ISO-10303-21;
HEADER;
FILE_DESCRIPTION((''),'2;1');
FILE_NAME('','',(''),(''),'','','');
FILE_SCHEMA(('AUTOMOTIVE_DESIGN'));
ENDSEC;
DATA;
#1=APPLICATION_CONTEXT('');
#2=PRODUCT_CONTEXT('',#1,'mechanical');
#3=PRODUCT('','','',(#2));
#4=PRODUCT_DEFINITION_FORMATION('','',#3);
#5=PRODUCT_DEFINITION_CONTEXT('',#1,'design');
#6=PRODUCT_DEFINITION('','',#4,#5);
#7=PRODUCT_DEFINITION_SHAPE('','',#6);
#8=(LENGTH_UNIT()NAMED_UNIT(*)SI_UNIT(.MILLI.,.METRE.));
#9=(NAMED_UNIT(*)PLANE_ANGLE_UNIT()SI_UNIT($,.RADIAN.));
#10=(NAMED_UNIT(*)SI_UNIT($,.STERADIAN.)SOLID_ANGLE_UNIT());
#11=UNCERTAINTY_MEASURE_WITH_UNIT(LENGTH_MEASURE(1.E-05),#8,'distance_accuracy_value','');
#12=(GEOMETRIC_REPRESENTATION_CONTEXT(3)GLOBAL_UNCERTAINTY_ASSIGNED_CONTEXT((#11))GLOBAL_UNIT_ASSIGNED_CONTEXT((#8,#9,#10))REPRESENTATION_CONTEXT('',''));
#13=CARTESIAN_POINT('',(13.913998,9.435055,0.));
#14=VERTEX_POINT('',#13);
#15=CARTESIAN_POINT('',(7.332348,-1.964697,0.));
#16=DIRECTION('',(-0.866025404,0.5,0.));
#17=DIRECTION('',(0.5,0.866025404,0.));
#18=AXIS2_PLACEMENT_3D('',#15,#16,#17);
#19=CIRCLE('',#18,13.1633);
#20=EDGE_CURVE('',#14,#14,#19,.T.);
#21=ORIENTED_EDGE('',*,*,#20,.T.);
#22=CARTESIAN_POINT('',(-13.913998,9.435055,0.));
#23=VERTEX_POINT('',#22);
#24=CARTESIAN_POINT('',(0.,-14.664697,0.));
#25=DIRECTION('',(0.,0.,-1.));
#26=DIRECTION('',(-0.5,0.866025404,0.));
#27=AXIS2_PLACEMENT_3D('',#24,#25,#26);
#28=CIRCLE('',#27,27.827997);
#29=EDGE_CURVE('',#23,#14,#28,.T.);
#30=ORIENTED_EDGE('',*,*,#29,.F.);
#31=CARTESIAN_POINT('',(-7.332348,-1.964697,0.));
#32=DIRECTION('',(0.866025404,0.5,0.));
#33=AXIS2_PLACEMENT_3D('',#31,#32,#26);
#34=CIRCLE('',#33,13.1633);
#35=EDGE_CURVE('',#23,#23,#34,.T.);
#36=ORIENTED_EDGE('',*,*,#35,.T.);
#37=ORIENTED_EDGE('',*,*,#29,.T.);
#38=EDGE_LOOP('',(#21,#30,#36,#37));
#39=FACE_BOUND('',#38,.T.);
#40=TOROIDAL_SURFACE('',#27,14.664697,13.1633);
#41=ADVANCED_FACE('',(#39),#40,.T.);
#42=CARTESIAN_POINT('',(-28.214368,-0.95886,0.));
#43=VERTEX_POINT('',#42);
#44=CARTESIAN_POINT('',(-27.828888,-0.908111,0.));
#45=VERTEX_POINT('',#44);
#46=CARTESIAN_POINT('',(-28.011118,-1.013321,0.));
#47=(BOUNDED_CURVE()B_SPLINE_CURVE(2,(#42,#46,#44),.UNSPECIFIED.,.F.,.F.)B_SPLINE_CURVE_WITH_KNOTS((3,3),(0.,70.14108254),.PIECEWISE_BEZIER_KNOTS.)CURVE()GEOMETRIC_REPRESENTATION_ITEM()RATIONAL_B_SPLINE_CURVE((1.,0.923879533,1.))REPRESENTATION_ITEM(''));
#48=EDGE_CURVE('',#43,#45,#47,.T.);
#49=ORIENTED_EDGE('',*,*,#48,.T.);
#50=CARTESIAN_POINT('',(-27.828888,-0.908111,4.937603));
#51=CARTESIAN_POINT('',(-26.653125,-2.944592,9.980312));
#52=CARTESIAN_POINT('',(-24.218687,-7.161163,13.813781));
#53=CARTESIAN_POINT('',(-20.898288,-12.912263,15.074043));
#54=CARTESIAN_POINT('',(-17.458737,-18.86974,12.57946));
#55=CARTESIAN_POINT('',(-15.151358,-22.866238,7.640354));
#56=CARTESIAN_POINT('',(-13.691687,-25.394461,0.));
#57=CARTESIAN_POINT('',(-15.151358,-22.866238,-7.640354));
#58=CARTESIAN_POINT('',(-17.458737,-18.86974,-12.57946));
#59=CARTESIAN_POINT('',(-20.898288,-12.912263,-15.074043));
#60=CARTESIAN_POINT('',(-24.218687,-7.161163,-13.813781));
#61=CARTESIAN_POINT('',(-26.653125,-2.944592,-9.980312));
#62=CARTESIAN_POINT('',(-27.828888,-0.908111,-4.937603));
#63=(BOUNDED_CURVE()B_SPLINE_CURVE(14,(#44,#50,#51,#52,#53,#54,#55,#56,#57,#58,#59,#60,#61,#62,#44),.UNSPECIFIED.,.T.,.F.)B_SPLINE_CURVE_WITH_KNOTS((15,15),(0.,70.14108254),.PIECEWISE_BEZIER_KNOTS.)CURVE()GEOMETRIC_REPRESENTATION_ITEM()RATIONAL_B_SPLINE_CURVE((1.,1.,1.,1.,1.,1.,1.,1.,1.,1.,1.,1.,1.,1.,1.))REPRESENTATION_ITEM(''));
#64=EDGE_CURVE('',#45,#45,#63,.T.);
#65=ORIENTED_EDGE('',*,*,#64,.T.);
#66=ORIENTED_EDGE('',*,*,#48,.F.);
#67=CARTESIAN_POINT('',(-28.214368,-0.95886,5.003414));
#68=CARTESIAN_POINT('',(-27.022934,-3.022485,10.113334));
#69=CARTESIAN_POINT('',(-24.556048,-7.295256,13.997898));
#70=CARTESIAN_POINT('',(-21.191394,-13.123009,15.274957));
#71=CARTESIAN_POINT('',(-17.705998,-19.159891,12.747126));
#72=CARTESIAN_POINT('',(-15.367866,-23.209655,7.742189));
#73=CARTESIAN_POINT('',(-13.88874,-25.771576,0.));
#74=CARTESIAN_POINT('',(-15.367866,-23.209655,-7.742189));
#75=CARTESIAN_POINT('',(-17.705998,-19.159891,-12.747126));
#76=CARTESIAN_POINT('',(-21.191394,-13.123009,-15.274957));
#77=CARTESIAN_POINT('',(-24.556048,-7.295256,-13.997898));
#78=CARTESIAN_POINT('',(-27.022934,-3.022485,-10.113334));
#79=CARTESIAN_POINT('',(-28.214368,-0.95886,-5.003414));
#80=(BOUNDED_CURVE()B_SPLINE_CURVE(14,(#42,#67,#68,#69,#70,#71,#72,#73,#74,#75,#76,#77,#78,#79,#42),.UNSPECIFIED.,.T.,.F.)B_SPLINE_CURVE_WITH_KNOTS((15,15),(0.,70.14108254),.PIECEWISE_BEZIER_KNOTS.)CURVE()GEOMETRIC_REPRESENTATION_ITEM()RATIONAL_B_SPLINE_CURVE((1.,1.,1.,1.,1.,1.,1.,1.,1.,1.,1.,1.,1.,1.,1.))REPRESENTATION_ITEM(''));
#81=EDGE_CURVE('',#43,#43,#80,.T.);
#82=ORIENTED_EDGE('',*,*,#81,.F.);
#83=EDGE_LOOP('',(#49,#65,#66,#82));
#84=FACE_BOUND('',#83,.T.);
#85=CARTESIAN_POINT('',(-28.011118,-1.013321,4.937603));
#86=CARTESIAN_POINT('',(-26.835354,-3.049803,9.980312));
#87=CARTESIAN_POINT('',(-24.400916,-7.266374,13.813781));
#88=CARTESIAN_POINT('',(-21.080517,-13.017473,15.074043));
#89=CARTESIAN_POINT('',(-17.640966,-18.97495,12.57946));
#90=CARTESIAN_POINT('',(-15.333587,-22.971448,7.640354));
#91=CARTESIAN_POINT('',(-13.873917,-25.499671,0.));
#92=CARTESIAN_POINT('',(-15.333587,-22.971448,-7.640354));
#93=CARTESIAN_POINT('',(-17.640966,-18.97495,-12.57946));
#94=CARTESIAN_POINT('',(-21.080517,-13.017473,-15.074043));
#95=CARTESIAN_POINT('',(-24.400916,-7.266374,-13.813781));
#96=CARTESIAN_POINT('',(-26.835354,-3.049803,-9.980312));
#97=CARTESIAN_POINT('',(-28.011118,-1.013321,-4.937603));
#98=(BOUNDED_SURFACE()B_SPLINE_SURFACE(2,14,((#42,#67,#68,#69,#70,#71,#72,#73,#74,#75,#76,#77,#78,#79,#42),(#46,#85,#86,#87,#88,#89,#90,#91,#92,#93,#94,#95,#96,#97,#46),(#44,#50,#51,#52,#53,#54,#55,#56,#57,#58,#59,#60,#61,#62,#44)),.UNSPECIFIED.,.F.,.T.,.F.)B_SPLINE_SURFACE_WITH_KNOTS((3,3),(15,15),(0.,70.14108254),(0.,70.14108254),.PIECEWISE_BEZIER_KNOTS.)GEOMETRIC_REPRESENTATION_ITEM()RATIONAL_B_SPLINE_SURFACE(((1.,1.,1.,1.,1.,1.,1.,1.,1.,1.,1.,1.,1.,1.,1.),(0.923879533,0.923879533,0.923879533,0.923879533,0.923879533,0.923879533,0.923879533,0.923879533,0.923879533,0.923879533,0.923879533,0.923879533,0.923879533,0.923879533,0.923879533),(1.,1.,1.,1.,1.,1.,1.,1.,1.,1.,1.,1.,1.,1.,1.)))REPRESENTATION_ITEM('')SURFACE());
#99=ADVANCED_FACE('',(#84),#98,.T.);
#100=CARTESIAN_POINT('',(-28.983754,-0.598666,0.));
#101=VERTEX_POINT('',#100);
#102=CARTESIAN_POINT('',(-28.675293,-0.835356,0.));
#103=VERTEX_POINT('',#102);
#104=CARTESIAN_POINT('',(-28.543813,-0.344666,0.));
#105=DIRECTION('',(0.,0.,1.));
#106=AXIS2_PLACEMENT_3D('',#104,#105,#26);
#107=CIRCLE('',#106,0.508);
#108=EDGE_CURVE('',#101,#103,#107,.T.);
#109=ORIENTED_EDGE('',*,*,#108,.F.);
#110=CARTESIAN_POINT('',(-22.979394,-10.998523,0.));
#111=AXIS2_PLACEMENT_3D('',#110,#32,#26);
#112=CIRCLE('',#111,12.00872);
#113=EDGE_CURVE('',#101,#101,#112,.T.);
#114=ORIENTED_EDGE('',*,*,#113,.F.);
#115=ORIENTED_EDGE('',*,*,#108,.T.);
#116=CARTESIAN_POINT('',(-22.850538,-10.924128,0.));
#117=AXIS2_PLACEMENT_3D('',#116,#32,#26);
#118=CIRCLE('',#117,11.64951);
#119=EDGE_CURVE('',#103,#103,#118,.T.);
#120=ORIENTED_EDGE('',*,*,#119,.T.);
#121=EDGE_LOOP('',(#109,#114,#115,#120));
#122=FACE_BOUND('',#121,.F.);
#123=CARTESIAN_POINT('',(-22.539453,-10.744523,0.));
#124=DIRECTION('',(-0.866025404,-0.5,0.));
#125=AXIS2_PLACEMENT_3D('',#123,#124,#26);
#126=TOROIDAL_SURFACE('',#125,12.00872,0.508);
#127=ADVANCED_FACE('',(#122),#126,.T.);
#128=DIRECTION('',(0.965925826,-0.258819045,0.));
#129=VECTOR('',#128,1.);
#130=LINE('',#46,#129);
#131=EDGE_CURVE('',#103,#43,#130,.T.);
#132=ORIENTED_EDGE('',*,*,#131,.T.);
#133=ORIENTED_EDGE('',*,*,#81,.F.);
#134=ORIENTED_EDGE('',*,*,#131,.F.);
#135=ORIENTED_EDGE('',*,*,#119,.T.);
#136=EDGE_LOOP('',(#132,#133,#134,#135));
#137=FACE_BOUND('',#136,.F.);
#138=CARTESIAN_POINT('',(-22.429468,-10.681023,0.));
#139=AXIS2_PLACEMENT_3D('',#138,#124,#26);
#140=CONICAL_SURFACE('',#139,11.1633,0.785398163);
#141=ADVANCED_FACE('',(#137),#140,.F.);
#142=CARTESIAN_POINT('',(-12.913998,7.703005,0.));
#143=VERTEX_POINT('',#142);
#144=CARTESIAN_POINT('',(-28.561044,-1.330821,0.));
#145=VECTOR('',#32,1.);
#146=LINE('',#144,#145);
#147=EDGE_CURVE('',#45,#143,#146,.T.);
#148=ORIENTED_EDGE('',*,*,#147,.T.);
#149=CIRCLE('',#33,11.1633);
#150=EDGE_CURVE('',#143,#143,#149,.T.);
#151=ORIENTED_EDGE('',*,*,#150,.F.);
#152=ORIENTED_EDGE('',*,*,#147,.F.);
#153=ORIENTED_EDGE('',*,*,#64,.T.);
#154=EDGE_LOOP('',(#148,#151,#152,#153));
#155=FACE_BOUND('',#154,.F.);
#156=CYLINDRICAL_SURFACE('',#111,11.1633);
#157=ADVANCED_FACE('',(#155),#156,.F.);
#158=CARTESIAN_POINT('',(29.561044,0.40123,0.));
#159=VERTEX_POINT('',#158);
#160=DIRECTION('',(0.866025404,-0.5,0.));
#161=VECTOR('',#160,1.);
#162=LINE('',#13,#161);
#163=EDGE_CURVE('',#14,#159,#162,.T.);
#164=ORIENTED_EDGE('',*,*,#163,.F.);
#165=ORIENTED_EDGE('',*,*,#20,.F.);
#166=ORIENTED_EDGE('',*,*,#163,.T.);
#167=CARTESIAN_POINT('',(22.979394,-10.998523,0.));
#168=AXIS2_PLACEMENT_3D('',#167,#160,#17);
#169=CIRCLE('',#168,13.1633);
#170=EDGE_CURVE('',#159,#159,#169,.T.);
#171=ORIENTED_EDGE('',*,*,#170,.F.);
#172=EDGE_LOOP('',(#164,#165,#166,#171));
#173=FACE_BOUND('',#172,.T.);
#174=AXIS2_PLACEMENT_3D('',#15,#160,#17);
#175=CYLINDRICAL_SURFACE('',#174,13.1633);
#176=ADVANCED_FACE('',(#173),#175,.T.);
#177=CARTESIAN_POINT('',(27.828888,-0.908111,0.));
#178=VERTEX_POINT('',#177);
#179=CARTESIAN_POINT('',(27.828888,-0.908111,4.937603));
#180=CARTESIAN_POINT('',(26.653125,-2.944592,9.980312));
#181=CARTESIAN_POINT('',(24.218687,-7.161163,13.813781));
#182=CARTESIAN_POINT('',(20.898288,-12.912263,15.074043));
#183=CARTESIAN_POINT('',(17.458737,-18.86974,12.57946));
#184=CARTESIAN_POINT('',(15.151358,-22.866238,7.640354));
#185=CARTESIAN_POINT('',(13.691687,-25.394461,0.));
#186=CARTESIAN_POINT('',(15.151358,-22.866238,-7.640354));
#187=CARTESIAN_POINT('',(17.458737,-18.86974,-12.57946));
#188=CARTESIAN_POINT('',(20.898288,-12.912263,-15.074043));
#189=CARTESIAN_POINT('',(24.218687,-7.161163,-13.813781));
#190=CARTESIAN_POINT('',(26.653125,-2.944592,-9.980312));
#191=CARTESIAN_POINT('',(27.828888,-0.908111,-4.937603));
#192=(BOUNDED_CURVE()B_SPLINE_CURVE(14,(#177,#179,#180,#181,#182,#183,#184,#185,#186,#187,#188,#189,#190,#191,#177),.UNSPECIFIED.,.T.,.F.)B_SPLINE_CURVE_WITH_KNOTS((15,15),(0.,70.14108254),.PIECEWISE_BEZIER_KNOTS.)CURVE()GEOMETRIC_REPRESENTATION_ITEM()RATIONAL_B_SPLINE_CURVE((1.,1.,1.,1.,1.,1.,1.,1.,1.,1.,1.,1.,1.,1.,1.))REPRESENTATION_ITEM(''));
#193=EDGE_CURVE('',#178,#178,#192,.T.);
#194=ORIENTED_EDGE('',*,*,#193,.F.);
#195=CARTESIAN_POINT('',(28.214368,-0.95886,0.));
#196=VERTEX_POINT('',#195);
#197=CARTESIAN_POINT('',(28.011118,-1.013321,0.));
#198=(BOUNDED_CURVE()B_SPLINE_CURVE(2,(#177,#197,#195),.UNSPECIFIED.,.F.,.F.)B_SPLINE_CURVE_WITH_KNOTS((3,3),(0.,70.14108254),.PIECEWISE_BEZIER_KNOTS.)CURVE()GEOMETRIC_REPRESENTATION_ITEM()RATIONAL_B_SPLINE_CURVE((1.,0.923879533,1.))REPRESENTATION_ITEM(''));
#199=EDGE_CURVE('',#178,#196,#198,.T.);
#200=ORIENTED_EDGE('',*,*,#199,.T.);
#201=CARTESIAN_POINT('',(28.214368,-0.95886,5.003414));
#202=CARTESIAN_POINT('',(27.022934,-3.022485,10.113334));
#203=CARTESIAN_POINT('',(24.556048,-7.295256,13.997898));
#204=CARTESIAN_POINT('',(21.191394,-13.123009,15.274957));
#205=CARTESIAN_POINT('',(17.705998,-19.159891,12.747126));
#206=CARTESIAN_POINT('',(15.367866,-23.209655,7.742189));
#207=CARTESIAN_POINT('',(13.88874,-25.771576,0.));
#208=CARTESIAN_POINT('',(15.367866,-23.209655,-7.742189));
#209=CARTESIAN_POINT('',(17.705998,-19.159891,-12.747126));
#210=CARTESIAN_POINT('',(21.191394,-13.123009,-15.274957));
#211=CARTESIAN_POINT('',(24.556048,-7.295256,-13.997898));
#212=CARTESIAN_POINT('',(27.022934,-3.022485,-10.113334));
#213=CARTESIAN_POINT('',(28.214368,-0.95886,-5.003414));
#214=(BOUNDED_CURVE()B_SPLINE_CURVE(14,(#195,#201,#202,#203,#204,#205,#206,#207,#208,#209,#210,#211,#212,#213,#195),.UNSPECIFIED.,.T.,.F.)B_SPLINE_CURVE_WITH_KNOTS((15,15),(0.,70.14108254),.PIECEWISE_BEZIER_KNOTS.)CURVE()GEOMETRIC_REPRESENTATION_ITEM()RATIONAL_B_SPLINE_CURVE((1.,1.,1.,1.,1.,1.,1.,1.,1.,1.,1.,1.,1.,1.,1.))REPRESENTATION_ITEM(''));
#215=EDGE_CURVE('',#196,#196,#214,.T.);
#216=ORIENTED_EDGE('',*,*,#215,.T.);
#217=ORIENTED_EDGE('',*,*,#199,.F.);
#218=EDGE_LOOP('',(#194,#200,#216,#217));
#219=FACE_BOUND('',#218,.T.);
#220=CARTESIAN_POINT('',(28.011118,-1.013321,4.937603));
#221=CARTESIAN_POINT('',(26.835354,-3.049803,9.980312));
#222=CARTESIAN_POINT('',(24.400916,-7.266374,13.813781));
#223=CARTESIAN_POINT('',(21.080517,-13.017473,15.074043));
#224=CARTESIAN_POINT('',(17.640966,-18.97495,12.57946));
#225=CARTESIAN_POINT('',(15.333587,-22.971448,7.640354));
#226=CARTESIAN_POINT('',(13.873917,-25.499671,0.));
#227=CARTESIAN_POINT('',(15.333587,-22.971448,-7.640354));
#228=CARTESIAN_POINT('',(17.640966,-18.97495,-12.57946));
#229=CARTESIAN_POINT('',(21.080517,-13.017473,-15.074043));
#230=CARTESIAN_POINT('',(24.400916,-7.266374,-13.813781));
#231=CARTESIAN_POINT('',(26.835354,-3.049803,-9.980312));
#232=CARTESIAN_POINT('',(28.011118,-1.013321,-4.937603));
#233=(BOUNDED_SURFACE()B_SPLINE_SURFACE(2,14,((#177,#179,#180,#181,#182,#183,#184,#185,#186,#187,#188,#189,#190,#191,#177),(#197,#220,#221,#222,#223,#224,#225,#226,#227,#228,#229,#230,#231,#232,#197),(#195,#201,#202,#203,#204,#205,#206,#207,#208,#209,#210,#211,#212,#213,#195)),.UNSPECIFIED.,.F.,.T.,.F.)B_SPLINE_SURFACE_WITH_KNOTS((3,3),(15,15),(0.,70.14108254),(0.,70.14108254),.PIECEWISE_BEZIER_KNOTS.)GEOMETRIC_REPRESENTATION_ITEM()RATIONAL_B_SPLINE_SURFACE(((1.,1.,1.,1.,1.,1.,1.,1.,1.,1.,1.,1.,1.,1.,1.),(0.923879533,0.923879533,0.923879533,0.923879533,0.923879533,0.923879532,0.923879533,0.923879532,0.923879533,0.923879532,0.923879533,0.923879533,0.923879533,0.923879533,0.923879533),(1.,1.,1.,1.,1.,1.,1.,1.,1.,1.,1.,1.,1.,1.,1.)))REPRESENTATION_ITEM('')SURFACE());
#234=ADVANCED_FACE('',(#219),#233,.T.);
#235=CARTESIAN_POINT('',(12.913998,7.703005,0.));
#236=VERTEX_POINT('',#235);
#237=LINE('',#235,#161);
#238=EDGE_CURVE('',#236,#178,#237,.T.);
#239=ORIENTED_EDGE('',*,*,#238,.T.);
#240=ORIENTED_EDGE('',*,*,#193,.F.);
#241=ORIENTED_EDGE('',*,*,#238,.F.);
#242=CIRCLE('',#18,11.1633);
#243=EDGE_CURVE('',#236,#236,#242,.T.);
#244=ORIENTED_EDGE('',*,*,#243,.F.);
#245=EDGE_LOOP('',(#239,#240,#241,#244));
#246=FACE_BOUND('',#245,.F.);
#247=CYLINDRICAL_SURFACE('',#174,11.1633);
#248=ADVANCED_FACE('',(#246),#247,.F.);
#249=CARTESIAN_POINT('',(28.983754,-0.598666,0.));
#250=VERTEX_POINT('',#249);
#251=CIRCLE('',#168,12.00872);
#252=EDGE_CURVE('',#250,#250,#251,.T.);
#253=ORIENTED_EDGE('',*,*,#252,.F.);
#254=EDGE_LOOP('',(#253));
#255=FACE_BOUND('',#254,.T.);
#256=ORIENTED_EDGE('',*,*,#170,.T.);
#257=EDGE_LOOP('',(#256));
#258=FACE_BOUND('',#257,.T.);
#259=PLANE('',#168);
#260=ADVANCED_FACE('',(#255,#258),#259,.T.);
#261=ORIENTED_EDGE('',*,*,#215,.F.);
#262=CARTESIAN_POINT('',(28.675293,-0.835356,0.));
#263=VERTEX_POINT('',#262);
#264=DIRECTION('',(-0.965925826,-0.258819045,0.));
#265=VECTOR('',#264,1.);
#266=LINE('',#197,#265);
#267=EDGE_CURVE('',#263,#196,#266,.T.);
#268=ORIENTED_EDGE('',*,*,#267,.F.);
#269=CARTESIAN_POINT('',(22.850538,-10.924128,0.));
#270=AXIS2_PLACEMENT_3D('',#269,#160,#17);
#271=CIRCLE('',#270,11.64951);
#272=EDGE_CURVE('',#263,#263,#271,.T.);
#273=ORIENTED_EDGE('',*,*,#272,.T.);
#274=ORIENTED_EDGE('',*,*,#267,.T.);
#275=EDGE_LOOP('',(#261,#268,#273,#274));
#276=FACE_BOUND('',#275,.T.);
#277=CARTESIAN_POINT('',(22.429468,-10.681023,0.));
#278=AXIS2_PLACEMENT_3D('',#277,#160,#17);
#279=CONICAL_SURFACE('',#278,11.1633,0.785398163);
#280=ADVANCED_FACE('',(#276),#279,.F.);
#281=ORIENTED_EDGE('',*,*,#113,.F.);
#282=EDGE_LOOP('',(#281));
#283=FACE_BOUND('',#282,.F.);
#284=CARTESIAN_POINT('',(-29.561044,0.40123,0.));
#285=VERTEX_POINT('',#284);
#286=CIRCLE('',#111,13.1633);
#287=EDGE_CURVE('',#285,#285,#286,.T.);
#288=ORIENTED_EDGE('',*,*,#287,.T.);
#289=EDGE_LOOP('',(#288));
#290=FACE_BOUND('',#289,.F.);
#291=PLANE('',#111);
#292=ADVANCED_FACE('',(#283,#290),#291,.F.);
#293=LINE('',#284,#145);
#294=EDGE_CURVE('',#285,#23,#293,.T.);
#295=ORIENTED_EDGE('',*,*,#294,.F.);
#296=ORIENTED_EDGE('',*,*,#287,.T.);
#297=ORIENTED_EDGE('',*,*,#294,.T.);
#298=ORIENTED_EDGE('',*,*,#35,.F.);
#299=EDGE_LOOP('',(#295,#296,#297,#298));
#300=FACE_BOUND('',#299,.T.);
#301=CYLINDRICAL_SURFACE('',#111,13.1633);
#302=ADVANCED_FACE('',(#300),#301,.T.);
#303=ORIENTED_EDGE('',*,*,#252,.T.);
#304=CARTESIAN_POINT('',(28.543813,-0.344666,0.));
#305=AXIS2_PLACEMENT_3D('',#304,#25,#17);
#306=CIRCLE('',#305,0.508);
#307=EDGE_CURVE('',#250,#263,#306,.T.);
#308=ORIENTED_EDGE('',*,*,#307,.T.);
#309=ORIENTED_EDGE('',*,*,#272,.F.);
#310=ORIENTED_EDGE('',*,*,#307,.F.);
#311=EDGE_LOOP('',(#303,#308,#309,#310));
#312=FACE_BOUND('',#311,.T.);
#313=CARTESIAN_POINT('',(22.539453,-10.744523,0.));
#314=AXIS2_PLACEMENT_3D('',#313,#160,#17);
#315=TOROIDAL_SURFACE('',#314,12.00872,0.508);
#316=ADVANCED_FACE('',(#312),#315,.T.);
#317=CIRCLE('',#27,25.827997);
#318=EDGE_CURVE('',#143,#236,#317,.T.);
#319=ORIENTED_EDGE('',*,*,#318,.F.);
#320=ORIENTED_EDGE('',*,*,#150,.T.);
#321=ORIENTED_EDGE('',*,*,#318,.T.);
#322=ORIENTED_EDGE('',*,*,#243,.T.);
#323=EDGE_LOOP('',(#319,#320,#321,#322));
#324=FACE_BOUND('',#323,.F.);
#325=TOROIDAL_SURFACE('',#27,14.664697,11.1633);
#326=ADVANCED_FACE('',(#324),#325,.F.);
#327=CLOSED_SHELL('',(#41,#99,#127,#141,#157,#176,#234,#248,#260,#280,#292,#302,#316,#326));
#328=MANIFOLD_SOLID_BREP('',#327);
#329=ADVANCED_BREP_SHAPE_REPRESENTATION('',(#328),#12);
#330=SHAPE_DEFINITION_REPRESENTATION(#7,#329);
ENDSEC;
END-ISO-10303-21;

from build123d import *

# Parameters (mm, degrees)
F1_R    = 13.1633
F1_R_2  = 11.1633
F3_SIZE = 0.635
F4_R    = 0.508


with BuildPart() as f2:
    # F2: sweep along a path in F0
    with BuildLine(Plane.XY) as f2_path:
        Line((-21.9970452561, -12.7), (-6.35, -3.6661742094))
        ThreePointArc((-6.35, -3.6661742094), (0, -1.9646968374), (6.35, -3.6661742094))
        Line((6.35, -3.6661742094), (21.9970452561, -12.7))
    # F1 (on Right) → F2 (sweep)
    with BuildSketch(Plane.YZ):
        Circle(F1_R)
        Circle(F1_R_2, mode=Mode.SUBTRACT)
    sweep(path=f2_path.line)

    # F3
    f3_edges = [f2.edges().sort_by_distance(p)[0] for p in [
        (17.397744, -20.666224, 0),
        (-17.397744, -20.666224, 0),
    ]]
    chamfer(f3_edges, length=F3_SIZE)

    # F4
    f4_edges = [f2.edges().sort_by_distance(p)[0] for p in [
        (-17.080244, -21.21615, 0),
        (-16.847818, -20.348724, 0),
        (16.847818, -20.348724, 0),
        (17.080244, -21.21615, 0),
    ]]
    fillet(f4_edges, radius=F4_R)


solid = f2.part
